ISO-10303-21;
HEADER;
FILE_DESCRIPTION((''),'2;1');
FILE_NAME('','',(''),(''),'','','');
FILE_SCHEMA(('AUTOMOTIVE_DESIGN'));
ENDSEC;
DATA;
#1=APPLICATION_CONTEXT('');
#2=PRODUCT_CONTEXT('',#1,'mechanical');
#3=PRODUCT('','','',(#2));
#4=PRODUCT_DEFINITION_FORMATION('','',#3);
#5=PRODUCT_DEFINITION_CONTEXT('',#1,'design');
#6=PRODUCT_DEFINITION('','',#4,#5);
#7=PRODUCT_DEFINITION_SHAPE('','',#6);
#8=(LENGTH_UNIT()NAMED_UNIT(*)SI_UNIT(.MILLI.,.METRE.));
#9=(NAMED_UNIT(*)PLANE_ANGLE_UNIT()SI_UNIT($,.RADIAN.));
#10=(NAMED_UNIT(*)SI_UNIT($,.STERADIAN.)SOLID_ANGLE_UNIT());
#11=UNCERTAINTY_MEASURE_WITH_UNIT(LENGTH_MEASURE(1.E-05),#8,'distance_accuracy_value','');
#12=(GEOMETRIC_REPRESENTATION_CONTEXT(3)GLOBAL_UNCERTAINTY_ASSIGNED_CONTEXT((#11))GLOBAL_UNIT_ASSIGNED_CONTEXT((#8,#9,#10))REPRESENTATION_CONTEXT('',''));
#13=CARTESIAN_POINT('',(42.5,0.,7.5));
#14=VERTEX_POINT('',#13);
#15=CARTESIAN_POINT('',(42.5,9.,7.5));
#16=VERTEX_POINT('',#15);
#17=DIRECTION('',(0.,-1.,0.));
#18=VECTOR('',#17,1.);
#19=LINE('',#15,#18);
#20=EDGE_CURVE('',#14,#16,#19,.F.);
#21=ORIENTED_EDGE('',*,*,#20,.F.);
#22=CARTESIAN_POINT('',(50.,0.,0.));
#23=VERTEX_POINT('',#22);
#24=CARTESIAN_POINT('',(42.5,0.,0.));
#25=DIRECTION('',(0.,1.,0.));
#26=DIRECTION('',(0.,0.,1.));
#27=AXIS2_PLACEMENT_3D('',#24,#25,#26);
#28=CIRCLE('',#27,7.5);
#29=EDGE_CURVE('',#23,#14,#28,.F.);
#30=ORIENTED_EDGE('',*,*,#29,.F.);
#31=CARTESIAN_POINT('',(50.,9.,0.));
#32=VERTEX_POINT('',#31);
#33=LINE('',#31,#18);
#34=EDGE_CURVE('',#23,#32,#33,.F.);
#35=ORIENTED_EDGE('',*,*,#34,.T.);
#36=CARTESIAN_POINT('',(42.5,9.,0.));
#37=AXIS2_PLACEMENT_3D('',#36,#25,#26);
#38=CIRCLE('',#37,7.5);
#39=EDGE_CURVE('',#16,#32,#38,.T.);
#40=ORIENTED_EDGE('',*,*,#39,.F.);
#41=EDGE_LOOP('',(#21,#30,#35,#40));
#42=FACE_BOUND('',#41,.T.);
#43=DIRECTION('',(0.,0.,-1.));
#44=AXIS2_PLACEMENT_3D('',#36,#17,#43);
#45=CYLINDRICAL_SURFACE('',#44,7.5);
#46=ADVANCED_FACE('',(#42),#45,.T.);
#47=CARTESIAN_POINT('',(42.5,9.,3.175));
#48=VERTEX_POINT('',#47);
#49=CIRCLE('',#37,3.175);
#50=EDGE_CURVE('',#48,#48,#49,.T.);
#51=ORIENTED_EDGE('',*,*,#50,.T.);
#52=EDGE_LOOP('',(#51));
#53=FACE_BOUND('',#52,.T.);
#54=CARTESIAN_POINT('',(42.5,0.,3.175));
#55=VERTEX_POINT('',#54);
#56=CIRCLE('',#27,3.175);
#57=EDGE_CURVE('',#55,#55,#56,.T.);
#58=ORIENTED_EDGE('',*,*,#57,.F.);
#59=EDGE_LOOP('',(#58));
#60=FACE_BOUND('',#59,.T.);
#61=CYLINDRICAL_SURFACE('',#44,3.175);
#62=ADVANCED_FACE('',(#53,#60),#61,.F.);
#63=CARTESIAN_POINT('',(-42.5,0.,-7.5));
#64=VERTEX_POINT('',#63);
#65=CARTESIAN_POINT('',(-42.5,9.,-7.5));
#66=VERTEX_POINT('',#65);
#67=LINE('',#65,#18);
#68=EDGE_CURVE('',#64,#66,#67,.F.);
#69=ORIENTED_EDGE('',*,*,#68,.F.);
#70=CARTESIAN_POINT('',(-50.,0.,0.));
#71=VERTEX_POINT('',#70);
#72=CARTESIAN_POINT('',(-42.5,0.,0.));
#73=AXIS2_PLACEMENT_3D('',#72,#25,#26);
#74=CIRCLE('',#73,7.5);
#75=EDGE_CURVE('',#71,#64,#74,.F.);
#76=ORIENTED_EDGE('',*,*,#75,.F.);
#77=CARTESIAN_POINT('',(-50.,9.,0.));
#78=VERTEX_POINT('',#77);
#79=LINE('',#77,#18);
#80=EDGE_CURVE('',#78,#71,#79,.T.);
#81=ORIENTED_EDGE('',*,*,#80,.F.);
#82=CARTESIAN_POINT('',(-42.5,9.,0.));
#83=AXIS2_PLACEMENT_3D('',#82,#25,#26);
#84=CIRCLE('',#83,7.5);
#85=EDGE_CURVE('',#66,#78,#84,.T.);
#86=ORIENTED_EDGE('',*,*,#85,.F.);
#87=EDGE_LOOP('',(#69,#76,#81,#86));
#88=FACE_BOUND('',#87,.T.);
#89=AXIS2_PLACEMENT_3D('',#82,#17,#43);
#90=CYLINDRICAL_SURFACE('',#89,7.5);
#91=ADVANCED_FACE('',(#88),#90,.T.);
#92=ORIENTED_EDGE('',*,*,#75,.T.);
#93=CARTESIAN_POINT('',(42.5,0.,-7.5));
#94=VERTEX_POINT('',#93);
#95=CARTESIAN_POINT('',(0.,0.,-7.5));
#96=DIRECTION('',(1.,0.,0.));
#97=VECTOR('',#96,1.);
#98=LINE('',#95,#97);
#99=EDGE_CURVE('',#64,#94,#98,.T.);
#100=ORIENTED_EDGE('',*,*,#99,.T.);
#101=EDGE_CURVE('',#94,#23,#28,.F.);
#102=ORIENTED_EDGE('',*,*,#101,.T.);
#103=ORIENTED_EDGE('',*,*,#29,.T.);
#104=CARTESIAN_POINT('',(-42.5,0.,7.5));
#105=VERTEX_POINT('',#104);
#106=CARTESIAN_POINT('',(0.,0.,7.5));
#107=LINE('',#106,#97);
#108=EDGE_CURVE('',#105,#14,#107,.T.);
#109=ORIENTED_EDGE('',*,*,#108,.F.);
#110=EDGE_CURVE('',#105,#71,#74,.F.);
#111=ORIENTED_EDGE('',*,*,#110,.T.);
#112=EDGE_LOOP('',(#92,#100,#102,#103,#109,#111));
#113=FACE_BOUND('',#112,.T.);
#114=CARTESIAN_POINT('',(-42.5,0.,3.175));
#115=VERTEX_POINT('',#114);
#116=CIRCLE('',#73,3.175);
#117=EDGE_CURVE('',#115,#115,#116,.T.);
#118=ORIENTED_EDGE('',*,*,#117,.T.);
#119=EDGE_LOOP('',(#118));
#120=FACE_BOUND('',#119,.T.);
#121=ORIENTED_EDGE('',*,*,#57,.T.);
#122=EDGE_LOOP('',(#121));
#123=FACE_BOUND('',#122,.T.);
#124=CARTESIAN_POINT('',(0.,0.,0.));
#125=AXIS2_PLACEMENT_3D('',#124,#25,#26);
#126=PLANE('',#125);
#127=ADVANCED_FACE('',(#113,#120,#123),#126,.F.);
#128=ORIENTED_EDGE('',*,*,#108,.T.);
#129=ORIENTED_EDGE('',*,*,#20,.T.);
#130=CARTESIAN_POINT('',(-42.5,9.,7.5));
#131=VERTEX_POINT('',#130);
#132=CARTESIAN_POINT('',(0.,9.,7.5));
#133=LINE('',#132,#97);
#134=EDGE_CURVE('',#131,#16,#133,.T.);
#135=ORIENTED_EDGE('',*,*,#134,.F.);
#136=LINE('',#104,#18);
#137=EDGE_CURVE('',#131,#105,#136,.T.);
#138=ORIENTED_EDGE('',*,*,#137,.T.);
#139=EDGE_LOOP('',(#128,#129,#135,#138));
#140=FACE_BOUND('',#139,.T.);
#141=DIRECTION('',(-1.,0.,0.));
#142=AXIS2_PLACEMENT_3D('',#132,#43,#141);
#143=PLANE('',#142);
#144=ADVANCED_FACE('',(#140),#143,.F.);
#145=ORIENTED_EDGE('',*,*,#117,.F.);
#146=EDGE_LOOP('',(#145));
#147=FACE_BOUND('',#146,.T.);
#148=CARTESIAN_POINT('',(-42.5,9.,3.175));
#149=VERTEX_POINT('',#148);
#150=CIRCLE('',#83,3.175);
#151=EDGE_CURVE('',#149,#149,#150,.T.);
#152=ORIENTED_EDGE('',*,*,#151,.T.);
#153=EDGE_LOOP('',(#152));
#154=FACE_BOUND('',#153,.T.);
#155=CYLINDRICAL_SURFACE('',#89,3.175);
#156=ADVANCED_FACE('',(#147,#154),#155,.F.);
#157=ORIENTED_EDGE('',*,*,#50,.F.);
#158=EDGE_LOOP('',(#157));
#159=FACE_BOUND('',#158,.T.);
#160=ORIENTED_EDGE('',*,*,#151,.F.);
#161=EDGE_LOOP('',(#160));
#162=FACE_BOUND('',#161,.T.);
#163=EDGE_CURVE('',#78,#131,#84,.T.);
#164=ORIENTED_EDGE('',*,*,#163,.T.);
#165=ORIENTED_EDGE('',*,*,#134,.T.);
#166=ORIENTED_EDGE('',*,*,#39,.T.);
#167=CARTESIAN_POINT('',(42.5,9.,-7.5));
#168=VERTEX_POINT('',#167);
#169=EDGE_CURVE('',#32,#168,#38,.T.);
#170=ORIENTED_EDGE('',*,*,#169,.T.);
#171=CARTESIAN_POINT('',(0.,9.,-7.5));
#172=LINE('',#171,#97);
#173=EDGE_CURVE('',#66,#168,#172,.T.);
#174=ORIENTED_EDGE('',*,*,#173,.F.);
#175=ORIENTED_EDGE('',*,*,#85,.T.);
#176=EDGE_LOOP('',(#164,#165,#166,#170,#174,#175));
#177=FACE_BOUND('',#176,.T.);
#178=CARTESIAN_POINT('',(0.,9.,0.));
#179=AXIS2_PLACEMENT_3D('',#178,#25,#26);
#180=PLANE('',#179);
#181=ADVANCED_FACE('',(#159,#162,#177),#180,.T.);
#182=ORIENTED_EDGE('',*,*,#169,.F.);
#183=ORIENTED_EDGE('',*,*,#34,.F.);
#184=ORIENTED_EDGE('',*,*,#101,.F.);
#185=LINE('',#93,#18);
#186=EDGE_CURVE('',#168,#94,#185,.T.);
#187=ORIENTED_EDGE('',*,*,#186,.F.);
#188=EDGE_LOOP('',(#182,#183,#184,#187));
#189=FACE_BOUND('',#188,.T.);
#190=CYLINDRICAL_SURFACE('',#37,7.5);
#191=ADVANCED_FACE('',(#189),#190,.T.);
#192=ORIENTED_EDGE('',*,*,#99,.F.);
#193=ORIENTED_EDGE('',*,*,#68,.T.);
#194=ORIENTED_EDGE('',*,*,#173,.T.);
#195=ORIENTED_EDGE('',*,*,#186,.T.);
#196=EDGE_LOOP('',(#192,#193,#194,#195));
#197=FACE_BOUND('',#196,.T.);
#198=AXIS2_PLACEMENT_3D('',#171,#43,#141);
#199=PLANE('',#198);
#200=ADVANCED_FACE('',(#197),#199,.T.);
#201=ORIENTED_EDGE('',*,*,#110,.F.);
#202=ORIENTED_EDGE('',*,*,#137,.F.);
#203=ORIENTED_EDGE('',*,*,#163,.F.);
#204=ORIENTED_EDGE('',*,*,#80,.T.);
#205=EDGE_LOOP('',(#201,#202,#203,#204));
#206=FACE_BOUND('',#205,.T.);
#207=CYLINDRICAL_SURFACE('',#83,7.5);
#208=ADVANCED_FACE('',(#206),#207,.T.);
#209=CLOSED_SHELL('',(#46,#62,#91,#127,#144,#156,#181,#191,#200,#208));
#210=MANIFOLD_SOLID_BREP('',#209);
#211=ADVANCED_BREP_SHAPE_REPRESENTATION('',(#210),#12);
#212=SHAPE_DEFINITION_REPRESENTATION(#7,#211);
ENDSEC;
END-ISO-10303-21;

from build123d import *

# Parameters (mm, degrees)
BOSS_EXTRUDE1_DEPTH = 9
FILLET1_R           = 7.5


with BuildPart() as part:
    # Sketch1 → Boss-Extrude1 (new body)
    with BuildSketch(Plane(origin=(0, 0, 0), x_dir=(1, 0, 0), z_dir=(0, 1, 0))):
        with BuildLine():
            Line((-50, 7.5), (-50, -7.5))
            Line((-50, -7.5), (-42.5, -7.5))
            Line((-42.5, -7.5), (-42.5, -3.175))
            ThreePointArc((-42.5, -3.175), (-45.675, 0), (-42.5, 3.175))
            Line((-42.5, 3.175), (-42.5, 7.5))
            Line((-42.5, 7.5), (-50, 7.5))
        make_face()
        with BuildLine():
            Line((-42.5, -3.175), (-42.5, -7.5))
            Line((-42.5, -7.5), (42.5, -7.5))
            Line((42.5, -7.5), (42.5, -3.175))
            ThreePointArc((42.5, -3.175), (39.325, 0), (42.5, 3.175))
            Line((42.5, 3.175), (42.5, 7.5))
            Line((42.5, 7.5), (-42.5, 7.5))
            Line((-42.5, 7.5), (-42.5, 3.175))
            ThreePointArc((-42.5, 3.175), (-40.25493597, 2.24506403), (-39.325, 0))
            ThreePointArc((-39.325, 0), (-40.25493597, -2.24506403), (-42.5, -3.175))
        make_face()
        with BuildLine():
            Line((42.5, -3.175), (42.5, -7.5))
            Line((42.5, -7.5), (50, -7.5))
            Line((50, -7.5), (50, 7.5))
            Line((50, 7.5), (42.5, 7.5))
            Line((42.5, 7.5), (42.5, 3.175))
            ThreePointArc((42.5, 3.175), (44.74506403, 2.24506403), (45.675, 0))
            ThreePointArc((45.675, 0), (44.74506403, -2.24506403), (42.5, -3.175))
        make_face()
    extrude(amount=BOSS_EXTRUDE1_DEPTH)

    # Fillet1
    fillet1_edges = [part.edges().sort_by_distance(p)[0] for p in [
        (50, 4.5, 7.5),
        (50, 4.5, -7.5),
        (-50, 4.5, 7.5),
        (-50, 4.5, -7.5),
    ]]
    fillet(fillet1_edges, radius=FILLET1_R - 0.0001)  # a hair under: the kernel refuses the full size


solid = part.part
